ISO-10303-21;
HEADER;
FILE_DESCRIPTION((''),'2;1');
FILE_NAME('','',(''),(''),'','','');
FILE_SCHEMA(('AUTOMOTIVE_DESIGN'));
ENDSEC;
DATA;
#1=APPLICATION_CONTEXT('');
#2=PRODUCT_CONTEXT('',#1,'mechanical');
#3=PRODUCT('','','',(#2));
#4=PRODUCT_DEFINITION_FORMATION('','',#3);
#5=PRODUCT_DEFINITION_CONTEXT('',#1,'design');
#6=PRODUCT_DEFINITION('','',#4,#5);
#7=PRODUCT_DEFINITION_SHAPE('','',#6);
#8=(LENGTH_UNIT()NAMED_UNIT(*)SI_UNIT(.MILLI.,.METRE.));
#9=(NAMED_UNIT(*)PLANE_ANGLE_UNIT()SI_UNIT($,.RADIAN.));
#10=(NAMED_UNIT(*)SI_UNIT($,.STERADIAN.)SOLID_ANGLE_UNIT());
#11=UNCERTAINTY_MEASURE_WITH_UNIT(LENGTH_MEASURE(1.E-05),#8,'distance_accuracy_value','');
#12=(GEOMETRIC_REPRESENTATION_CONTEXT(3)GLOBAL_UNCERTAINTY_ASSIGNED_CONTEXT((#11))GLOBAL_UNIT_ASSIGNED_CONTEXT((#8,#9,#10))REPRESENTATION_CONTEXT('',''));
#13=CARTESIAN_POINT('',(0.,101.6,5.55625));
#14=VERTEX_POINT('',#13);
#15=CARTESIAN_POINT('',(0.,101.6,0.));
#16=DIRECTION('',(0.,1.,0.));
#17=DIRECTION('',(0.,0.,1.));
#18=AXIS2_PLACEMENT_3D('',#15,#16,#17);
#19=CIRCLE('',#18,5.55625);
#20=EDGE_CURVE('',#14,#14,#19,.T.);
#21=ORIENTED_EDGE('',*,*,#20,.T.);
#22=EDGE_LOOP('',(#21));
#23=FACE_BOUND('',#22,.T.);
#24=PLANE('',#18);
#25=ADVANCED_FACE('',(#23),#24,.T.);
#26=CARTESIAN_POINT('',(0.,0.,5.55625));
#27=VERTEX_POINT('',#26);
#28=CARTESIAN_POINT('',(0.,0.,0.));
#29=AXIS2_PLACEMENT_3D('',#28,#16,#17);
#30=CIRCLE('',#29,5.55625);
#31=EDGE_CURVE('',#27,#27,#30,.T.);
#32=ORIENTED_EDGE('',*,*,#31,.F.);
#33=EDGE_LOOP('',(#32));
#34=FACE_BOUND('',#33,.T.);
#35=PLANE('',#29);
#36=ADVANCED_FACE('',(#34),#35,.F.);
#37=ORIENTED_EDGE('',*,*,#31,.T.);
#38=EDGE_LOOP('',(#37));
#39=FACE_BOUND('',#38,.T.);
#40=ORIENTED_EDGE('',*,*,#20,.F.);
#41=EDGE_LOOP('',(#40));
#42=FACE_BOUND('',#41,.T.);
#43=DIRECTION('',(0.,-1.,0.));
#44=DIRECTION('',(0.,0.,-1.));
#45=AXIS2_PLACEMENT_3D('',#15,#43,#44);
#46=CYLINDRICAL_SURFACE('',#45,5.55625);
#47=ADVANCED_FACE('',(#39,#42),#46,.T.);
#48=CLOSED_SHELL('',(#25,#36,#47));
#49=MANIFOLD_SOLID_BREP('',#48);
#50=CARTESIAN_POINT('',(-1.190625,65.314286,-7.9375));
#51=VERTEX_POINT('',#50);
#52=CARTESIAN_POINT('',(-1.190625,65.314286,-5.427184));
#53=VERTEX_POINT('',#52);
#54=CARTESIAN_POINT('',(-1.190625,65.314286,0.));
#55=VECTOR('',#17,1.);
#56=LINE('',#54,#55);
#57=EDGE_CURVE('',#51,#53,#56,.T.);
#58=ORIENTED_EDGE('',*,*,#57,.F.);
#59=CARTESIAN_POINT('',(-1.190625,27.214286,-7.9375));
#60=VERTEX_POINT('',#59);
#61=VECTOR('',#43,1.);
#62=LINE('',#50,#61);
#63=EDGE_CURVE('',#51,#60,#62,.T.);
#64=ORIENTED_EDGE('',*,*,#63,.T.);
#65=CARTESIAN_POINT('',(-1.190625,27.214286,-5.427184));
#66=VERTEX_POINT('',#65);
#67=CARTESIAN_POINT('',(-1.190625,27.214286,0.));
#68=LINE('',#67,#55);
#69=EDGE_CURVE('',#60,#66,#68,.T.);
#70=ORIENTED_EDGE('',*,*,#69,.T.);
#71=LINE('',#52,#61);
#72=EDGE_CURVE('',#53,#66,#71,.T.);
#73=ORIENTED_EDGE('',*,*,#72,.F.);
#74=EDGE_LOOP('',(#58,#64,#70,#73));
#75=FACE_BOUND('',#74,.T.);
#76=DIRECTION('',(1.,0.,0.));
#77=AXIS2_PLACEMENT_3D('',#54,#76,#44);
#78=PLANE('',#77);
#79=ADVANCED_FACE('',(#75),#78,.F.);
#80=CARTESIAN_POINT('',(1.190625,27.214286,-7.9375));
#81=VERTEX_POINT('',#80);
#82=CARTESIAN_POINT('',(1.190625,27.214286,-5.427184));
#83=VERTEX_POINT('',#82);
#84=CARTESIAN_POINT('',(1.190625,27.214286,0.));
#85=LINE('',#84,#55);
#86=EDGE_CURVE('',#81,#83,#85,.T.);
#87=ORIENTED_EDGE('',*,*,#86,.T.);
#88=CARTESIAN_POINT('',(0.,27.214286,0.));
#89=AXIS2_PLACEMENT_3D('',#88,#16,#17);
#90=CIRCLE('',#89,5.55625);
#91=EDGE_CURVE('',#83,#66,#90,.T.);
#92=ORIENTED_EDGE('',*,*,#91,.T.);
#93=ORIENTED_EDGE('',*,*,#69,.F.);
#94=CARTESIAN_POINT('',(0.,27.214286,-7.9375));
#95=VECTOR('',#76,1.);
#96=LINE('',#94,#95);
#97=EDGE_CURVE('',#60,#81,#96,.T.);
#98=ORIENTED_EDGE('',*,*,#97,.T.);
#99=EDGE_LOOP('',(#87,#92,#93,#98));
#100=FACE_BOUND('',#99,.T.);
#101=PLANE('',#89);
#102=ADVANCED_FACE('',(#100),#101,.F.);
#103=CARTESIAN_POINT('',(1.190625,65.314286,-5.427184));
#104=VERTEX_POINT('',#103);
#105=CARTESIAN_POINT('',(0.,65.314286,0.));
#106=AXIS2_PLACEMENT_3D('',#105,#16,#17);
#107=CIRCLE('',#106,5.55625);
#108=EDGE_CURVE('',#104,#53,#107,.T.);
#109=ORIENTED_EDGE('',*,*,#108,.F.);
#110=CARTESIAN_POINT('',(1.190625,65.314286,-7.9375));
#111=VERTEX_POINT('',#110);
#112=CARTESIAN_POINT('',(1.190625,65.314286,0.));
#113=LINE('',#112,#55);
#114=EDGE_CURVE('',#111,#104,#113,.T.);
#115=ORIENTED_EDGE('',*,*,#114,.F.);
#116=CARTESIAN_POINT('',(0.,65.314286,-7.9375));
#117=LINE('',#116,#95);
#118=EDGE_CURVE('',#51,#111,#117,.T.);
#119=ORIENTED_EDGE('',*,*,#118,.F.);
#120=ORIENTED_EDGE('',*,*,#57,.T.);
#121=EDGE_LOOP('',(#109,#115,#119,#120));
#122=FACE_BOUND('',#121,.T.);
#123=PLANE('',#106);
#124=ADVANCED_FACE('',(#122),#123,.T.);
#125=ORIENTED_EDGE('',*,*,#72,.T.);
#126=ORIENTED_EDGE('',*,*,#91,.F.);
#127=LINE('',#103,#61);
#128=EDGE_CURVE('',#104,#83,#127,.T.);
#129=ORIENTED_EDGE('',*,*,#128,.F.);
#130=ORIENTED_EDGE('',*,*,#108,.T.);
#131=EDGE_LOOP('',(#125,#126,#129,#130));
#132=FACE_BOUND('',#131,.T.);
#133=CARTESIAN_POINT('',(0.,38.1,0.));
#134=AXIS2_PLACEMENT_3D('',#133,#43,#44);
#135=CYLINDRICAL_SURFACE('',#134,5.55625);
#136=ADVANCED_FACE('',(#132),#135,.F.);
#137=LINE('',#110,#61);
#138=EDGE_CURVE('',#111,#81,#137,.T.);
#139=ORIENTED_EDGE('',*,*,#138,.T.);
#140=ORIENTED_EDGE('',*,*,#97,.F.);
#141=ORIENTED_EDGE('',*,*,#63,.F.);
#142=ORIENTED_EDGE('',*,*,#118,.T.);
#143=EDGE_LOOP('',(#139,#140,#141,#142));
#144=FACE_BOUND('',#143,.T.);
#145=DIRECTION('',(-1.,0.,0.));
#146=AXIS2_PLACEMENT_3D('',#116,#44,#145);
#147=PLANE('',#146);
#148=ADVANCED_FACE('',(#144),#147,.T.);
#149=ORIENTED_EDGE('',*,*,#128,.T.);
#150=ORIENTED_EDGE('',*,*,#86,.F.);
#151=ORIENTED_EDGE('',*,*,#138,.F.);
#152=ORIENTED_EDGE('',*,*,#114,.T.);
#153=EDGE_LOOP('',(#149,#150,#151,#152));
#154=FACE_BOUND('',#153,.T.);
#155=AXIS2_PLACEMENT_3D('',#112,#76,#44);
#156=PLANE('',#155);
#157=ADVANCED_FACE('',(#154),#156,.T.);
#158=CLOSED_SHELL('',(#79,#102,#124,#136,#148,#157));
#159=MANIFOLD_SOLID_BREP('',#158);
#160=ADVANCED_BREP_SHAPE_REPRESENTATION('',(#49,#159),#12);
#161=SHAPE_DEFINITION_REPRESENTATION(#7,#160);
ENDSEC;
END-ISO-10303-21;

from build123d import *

# Parameters (mm, degrees)
BOSS_EXTRUDE2_DEPTH = 101.6
BOSS_EXTRUDE3_DEPTH = 38.1
MOVE_FACE4_DEPTH    = 27.214285714
MOVE_START          = 38.1
MOVE_FACE4_2_DEPTH  = 27.214285714


# Read off the part's stored shape, not the designer's step: Move Face4
with BuildPart() as part:
    # Sketch2 → Boss-Extrude2 (new body)
    with BuildSketch(Plane(origin=(0, 0, 0), x_dir=(1, 0, 0), z_dir=(0, 1, 0))):
        with BuildLine():
            Line((-1.190625, -5.427184), (-1.190625, 5.427184))
            ThreePointArc((-1.190625, 5.427184), (-5.55625, 0), (-1.190625, -5.427184))
        make_face()
        with BuildLine():
            ThreePointArc((1.190625, 5.427184), (0, 5.55625), (-1.190625, 5.427184))
            Line((-1.190625, 5.427184), (-1.190625, -5.427184))
            ThreePointArc((-1.190625, -5.427184), (0, -5.55625), (1.190625, -5.427184))
            Line((1.190625, -5.427184), (1.190625, 5.427184))
        make_face()
        with BuildLine():
            ThreePointArc((5.55625, 0), (4.32939512, 3.482563991), (1.190625, 5.427184))
            Line((1.190625, 5.427184), (1.190625, -5.427184))
            ThreePointArc((1.190625, -5.427184), (4.32939512, -3.482563991), (5.55625, 0))
        make_face()
    extrude(amount=BOSS_EXTRUDE2_DEPTH)


with BuildPart() as body_2:
    # Sketch2<4> → Boss-Extrude3 (new body)
    with BuildSketch(Plane(origin=(0, 0, 0), x_dir=(1, 0, 0), z_dir=(0, 1, 0))):
        with BuildLine():
            Line((1.190625, 7.9375), (-1.190625, 7.9375))
            Line((-1.190625, 7.9375), (-1.190625, 5.427184))
            ThreePointArc((-1.190625, 5.427184), (0, 5.55625), (1.190625, 5.427184))
            Line((1.190625, 5.427184), (1.190625, 7.9375))
        make_face()
    extrude(amount=BOSS_EXTRUDE3_DEPTH)

    # Move Face4 outline → Move Face4 (cut)
    with BuildSketch(Plane(origin=(0, 0, 0), x_dir=(1, 0, 0), z_dir=(0, 1, 0))):
        with BuildLine():
            Line((-1.190625, 7.9375), (-1.190625, 5.427184))
            ThreePointArc((-1.190625, 5.427184), (0, 5.55625), (1.190625, 5.427184))
            Line((1.190625, 5.427184), (1.190625, 7.9375))
            Line((1.190625, 7.9375), (-1.190625, 7.9375))
        make_face()
    extrude(amount=MOVE_FACE4_DEPTH, mode=Mode.SUBTRACT)

    # Move Face4 2 outline → Move Face4 2 (add)
    with BuildSketch(Plane(origin=(0, 0, 0), x_dir=(1, 0, 0), z_dir=(0, 1, 0)).offset(MOVE_START)):
        with BuildLine():
            Line((-1.190625, 7.9375), (-1.190625, 5.427184))
            ThreePointArc((-1.190625, 5.427184), (0, 5.55625), (1.190625, 5.427184))
            Line((1.190625, 5.427184), (1.190625, 7.9375))
            Line((1.190625, 7.9375), (-1.190625, 7.9375))
        make_face()
    extrude(amount=MOVE_FACE4_2_DEPTH)


solid = Compound([part.part, body_2.part])
